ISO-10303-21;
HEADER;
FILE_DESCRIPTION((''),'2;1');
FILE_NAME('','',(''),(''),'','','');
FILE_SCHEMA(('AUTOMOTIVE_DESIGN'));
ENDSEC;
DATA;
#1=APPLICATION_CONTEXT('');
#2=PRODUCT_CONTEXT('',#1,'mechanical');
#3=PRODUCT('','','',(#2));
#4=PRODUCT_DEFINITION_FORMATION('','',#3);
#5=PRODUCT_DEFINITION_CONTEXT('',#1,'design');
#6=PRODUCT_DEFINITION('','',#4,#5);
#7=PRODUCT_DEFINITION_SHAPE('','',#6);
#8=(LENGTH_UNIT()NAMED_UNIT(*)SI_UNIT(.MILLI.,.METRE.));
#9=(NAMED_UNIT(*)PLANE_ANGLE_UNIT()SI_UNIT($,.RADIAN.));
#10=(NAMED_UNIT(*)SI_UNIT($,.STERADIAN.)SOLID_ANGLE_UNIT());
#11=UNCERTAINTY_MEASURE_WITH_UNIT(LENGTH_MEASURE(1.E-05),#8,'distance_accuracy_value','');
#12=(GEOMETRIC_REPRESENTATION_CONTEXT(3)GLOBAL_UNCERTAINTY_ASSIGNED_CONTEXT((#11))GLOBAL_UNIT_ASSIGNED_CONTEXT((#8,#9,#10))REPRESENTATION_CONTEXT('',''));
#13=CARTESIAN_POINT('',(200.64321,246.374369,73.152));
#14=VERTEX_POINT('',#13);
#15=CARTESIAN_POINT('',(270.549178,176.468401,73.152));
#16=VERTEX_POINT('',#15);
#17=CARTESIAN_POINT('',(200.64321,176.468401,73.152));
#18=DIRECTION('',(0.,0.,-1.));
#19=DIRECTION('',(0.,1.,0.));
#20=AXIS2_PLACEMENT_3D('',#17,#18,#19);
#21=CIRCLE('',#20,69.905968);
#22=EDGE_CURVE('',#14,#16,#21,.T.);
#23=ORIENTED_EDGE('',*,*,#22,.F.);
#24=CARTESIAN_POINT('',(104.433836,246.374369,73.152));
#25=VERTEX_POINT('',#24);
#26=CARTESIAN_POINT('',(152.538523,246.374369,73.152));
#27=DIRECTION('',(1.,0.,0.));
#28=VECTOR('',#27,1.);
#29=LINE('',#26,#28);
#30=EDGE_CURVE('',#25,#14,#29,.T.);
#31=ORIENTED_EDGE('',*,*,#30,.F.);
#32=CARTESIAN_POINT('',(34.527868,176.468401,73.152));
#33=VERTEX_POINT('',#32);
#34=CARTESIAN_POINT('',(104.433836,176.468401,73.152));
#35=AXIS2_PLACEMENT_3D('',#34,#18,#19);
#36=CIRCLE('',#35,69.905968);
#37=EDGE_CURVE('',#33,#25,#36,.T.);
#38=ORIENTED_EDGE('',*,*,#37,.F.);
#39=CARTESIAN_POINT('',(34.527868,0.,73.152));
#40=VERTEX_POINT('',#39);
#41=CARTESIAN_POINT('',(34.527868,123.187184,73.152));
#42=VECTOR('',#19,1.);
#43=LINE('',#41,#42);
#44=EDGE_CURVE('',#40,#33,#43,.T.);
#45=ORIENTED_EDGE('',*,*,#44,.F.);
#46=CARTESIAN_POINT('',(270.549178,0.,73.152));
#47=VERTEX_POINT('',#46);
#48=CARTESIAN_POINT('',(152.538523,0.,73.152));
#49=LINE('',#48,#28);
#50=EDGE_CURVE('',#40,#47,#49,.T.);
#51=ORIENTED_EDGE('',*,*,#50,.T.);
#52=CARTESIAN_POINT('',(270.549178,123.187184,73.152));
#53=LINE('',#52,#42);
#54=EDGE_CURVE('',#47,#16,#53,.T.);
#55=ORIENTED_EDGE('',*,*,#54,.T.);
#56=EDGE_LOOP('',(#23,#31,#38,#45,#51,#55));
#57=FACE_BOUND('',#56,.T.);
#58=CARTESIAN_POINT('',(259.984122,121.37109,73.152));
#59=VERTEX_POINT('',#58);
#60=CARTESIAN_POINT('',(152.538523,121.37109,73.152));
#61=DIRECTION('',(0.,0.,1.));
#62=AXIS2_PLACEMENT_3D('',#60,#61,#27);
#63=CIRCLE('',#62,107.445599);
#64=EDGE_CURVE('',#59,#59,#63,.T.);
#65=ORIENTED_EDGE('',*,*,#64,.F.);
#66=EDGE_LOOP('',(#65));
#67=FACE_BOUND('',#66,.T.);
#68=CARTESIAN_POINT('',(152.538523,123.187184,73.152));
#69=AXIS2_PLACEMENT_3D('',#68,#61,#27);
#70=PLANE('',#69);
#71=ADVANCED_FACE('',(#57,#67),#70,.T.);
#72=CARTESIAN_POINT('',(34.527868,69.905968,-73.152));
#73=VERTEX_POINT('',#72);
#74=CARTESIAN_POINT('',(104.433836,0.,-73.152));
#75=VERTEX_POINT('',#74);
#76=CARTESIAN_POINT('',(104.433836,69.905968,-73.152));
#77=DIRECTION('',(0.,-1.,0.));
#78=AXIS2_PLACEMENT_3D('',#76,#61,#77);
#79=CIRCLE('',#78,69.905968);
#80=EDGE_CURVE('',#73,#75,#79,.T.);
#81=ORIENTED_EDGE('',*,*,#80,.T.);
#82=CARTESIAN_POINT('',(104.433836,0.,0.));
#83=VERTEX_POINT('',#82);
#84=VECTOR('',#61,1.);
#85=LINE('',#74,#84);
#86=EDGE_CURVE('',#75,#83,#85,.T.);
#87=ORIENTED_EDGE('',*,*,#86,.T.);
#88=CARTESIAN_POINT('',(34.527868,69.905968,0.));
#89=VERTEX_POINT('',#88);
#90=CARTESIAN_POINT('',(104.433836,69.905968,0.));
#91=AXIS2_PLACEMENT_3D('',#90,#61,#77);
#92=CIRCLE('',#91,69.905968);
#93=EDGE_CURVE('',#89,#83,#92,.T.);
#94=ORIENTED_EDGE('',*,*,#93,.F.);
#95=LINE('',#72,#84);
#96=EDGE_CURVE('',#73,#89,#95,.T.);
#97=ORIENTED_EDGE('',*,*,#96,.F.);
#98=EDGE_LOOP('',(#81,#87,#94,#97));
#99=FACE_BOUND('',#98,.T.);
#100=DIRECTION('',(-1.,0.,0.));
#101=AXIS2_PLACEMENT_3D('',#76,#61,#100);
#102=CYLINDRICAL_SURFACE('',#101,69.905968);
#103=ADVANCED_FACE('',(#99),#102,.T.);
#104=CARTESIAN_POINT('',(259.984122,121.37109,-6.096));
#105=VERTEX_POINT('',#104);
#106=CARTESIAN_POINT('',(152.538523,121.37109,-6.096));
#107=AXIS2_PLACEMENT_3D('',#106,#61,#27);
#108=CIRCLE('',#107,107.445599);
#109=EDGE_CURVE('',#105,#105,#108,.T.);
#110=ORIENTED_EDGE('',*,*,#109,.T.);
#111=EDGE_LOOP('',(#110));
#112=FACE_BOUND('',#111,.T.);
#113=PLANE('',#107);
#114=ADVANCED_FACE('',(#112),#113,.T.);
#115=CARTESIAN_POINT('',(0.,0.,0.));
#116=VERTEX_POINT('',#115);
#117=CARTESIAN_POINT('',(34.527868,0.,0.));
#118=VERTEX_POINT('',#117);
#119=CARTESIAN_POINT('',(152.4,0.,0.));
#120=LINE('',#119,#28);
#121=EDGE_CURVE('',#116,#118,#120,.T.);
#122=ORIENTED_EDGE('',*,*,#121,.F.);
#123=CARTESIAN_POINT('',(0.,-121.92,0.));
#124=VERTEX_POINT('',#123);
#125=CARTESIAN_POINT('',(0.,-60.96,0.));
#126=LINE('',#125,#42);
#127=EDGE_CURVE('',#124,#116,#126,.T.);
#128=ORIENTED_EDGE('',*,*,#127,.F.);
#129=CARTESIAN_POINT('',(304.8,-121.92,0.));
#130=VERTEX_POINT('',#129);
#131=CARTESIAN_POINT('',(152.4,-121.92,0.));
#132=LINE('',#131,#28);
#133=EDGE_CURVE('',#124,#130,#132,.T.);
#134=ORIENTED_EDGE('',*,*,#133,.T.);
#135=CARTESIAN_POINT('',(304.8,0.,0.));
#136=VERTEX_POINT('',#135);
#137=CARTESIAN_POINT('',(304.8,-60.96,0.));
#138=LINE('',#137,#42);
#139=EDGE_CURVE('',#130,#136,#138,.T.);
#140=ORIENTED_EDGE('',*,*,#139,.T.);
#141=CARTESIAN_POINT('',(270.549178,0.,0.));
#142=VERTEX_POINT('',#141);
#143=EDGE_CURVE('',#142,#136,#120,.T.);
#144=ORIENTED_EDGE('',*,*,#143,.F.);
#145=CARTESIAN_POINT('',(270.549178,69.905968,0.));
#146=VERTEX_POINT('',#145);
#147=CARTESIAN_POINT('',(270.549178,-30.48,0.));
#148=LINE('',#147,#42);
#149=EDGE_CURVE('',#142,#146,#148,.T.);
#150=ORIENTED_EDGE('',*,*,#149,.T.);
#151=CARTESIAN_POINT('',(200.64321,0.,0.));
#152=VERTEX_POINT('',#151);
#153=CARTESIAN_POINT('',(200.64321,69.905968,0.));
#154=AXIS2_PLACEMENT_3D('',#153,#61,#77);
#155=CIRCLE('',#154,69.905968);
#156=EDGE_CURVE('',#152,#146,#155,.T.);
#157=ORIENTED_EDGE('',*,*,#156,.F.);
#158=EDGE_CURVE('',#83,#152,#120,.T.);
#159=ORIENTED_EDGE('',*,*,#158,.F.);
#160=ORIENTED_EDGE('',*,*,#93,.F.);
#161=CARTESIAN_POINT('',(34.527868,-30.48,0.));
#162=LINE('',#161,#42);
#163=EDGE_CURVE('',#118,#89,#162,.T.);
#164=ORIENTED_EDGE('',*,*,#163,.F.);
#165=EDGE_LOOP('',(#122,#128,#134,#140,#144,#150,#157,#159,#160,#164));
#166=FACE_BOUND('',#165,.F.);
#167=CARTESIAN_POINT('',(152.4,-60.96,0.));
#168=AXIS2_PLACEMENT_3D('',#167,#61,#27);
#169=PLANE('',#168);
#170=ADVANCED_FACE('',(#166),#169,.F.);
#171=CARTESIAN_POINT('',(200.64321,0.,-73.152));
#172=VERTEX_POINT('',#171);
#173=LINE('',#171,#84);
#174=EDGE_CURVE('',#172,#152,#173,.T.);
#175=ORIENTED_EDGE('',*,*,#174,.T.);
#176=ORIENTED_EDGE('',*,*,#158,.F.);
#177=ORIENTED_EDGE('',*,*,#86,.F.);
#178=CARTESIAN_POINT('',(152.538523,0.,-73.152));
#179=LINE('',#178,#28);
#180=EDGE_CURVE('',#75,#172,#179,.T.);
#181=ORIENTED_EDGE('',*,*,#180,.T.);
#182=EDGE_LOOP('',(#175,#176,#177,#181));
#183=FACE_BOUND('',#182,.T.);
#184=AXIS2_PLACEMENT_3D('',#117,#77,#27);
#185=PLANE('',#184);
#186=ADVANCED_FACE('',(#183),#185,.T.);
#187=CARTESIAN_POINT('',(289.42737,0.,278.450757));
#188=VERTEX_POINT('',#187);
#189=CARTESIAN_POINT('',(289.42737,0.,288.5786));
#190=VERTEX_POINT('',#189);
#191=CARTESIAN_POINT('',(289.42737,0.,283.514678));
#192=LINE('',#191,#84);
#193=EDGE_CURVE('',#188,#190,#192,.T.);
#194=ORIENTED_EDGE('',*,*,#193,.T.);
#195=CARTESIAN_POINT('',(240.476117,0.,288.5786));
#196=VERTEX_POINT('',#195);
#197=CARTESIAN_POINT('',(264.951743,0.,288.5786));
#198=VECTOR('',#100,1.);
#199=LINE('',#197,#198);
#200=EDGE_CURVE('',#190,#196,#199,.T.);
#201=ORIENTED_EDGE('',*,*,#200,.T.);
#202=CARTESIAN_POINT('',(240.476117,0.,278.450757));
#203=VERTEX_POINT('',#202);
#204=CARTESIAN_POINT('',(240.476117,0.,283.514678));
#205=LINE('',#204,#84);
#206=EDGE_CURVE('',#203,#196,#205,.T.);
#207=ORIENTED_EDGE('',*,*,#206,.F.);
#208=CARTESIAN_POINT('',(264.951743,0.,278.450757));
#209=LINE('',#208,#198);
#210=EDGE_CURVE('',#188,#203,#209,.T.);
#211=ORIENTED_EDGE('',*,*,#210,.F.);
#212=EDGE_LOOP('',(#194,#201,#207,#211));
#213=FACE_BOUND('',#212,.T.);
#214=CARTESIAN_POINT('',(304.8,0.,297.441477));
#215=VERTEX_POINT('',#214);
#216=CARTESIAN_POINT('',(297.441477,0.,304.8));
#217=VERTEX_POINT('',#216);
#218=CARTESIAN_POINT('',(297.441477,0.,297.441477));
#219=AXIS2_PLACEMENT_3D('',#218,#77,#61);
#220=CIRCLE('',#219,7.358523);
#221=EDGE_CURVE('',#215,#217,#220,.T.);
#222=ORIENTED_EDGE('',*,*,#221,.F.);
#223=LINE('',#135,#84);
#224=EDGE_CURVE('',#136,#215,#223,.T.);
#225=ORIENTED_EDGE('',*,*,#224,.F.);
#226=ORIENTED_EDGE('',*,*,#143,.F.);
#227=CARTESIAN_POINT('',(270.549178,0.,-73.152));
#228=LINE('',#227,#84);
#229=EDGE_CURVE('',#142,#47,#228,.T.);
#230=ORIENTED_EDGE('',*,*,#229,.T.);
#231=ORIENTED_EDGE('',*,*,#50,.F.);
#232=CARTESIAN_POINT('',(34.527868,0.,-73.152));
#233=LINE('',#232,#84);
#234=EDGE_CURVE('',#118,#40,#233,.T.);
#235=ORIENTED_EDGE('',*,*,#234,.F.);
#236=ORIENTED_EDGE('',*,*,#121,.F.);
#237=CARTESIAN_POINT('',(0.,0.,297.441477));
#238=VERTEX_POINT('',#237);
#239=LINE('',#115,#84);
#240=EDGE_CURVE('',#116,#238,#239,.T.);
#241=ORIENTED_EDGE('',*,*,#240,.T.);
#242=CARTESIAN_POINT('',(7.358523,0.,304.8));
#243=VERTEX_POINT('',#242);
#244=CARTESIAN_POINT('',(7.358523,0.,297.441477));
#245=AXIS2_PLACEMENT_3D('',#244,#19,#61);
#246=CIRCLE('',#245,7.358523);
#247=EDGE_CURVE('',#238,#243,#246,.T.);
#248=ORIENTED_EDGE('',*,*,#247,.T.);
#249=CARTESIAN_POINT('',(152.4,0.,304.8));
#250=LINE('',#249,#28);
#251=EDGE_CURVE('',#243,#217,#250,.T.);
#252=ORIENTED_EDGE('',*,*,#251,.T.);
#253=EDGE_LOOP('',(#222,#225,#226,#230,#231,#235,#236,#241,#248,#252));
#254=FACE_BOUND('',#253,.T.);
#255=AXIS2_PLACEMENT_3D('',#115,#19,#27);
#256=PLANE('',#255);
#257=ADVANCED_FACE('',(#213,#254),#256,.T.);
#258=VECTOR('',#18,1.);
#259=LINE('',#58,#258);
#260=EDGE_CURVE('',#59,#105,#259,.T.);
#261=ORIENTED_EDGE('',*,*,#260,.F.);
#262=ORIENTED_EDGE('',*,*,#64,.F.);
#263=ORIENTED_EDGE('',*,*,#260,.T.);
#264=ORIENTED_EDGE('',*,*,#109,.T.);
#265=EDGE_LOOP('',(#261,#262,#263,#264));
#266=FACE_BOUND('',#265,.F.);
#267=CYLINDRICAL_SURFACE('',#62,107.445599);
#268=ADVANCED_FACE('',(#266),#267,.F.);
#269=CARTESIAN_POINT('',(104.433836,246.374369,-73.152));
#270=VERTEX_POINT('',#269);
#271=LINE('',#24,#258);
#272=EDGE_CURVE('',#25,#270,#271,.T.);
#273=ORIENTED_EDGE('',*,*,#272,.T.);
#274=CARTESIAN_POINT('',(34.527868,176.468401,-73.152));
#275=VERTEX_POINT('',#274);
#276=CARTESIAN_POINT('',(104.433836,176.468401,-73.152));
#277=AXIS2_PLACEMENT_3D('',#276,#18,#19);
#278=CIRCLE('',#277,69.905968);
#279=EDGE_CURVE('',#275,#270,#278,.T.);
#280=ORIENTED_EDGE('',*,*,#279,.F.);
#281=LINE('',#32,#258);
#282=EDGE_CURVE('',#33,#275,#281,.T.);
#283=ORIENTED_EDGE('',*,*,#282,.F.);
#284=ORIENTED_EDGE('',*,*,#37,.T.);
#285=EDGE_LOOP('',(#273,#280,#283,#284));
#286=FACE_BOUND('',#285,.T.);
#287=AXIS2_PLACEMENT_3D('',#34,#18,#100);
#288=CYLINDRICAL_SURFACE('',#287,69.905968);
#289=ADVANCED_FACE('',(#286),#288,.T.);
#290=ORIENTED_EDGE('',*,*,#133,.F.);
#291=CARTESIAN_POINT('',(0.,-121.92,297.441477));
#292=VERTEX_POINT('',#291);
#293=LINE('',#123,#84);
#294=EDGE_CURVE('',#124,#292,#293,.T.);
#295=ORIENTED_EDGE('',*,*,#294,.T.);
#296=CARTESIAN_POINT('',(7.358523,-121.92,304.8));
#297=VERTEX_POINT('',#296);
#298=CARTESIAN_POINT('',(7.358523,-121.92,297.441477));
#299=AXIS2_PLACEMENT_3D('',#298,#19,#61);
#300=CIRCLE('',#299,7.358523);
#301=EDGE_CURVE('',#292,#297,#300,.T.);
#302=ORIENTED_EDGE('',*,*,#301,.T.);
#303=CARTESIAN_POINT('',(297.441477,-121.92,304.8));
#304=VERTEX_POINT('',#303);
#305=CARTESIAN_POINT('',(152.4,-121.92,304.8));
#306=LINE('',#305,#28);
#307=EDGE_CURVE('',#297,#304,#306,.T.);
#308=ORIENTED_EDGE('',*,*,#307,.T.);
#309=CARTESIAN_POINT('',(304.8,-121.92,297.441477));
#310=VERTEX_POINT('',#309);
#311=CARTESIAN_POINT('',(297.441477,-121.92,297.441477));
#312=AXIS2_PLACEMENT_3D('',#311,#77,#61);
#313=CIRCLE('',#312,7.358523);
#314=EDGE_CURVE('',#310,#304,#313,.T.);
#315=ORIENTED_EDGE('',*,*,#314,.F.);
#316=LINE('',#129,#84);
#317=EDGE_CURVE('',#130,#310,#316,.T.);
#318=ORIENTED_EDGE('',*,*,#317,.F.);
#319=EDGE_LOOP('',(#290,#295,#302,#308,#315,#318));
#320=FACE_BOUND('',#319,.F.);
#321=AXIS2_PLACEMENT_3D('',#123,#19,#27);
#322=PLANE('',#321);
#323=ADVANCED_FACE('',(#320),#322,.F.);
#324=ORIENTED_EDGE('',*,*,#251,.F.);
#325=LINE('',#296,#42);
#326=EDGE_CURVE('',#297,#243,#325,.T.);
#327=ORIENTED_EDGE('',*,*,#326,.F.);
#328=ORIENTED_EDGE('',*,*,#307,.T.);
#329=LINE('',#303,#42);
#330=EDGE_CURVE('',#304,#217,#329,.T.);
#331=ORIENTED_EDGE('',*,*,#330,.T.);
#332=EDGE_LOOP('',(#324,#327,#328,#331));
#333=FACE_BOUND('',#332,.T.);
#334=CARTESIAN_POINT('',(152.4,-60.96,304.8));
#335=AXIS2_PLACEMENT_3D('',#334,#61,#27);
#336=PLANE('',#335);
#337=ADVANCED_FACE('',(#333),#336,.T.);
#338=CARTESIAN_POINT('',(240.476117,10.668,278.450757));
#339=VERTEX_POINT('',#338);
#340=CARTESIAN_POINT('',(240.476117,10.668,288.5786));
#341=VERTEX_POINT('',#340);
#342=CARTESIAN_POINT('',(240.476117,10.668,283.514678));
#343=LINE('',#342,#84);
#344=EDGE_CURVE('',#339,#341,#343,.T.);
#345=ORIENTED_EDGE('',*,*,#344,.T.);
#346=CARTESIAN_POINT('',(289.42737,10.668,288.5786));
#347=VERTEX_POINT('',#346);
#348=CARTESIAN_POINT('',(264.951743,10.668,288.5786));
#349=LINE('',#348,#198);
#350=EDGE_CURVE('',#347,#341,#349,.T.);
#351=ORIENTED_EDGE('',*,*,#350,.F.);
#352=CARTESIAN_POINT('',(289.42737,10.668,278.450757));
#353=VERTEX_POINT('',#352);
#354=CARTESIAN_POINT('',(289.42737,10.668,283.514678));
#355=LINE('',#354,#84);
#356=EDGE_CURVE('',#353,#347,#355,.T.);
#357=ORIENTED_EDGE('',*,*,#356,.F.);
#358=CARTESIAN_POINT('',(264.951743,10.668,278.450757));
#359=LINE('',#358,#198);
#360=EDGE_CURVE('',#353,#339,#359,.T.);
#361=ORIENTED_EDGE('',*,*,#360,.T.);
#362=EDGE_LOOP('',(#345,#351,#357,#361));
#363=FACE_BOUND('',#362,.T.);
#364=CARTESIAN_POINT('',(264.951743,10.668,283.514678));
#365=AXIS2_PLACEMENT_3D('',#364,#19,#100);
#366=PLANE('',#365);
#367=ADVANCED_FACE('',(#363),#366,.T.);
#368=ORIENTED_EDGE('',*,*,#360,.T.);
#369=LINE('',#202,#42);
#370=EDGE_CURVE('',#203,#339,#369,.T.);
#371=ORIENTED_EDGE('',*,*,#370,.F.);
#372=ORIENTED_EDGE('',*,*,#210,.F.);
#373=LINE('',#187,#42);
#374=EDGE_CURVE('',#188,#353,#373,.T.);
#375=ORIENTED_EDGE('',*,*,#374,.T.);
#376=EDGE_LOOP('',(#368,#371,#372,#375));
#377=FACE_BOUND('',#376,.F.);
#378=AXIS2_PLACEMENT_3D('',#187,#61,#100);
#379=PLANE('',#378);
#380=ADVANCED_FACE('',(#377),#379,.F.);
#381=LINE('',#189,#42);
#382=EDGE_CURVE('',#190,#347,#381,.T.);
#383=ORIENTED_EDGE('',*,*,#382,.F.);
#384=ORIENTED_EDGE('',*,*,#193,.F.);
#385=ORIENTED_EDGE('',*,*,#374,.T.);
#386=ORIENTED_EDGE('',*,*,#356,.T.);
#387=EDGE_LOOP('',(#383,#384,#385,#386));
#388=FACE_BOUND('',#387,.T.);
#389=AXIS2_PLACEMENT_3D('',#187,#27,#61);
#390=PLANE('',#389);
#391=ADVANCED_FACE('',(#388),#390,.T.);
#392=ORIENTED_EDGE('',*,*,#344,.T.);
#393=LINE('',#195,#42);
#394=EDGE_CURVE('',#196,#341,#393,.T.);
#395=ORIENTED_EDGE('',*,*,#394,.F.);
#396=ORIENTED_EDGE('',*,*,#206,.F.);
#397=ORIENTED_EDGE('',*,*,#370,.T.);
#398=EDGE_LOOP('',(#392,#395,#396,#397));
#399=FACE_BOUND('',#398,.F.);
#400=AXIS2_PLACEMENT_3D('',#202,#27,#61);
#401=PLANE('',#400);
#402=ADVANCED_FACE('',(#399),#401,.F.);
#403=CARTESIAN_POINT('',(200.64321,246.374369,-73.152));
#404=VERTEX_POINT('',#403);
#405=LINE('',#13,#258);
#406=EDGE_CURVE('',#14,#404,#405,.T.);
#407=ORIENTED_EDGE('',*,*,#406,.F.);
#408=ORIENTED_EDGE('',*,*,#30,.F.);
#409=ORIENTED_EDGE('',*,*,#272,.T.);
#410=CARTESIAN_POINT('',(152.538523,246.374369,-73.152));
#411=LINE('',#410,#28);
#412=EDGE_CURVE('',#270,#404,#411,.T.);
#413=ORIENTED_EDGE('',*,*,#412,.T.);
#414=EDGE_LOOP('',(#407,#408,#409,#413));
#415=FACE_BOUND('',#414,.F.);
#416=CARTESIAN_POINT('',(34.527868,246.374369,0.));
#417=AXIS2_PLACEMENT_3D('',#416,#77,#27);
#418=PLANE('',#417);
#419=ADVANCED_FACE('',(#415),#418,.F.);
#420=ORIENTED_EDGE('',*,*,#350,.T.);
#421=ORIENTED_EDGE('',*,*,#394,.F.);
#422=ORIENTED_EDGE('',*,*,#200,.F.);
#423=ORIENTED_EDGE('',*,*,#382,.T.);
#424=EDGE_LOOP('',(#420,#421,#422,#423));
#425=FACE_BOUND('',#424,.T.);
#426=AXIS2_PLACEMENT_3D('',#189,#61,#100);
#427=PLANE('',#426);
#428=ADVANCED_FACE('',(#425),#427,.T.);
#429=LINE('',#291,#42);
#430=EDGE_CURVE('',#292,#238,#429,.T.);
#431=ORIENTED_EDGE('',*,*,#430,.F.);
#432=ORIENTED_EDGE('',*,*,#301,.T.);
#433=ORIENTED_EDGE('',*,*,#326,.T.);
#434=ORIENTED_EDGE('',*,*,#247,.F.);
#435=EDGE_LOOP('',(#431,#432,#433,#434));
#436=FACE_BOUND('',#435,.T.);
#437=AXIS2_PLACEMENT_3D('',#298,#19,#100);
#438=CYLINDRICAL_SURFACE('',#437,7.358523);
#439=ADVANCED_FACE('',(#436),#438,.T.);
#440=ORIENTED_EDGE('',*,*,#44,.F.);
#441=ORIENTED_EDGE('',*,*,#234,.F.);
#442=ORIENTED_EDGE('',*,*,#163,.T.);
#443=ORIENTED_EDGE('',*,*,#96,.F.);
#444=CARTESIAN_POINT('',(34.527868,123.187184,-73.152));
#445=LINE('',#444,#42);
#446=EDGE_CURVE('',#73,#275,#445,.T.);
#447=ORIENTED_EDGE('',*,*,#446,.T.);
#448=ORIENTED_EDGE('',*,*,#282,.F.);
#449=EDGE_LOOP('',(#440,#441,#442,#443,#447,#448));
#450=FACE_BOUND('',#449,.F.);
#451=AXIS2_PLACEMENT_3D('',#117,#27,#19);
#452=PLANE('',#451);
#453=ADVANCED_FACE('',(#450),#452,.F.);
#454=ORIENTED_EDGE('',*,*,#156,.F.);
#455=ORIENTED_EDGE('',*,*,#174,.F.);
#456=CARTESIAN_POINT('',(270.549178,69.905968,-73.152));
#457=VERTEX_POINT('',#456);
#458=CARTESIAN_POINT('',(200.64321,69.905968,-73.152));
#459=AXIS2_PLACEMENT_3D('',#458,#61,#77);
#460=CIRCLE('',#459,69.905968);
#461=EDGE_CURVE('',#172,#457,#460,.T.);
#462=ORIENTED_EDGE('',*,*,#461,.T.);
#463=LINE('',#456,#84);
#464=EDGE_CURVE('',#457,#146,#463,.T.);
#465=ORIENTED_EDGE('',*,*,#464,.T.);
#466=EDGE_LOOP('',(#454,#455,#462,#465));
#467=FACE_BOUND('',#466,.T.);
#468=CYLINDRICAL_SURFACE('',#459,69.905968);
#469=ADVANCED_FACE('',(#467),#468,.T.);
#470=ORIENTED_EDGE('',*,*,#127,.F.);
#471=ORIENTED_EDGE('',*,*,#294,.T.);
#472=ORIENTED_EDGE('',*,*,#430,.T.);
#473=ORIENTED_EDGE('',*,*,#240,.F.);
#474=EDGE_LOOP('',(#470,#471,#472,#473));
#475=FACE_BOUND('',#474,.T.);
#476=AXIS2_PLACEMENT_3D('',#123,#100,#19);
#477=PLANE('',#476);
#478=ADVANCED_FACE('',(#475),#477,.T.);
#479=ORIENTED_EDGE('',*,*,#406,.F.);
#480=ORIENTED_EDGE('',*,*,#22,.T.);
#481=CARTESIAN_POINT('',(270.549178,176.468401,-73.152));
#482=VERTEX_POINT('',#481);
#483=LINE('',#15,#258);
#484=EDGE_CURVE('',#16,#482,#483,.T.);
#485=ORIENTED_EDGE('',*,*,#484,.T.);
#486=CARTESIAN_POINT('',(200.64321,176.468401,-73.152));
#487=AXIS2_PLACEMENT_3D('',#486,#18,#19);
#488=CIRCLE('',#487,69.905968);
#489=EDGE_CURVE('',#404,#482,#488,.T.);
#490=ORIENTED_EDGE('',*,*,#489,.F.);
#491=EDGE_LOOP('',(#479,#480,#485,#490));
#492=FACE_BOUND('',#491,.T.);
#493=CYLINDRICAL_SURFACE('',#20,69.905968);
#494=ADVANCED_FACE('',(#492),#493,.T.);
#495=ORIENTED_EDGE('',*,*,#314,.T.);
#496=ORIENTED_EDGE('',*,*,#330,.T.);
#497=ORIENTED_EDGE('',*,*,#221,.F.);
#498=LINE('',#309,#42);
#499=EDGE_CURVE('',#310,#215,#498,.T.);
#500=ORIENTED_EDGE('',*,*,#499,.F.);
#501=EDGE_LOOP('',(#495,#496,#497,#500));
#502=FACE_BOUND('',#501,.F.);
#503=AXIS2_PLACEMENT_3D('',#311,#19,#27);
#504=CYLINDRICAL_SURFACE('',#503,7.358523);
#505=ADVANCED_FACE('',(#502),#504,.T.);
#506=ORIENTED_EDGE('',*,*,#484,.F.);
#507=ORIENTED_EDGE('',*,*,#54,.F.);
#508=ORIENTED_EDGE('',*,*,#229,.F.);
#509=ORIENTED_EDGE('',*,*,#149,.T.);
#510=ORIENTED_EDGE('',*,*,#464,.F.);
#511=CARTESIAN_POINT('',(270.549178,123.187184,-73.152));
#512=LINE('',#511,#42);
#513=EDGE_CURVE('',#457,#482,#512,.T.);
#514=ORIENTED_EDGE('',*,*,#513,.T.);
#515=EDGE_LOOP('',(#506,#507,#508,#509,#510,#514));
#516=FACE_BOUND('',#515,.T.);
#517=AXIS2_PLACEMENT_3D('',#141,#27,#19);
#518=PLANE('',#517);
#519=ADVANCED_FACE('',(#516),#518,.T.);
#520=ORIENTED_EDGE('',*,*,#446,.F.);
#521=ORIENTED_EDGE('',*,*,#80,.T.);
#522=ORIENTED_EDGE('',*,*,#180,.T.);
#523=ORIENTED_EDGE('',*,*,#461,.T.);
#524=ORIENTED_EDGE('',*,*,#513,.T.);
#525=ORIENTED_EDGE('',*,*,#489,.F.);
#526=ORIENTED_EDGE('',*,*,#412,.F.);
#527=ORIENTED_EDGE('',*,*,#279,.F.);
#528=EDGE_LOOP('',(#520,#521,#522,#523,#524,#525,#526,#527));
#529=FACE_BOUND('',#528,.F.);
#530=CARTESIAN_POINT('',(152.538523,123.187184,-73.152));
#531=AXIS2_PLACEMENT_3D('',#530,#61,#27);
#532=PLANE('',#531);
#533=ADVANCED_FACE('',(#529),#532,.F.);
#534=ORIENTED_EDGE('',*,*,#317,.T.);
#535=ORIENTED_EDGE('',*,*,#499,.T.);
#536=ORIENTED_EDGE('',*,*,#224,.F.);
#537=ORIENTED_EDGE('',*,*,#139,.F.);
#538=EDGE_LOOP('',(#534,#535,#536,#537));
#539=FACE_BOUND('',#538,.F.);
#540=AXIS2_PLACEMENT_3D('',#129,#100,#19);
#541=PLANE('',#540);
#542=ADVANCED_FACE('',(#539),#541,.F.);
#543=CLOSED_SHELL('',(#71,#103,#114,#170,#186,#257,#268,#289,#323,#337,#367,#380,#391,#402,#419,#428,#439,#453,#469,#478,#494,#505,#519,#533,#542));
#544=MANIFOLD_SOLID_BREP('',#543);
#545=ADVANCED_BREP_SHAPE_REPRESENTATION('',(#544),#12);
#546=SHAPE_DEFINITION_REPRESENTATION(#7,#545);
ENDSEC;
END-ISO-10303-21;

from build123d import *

# Parameters (mm, degrees)
F0_W     = 304.8
F0_H     = 121.92
F1_DEPTH = 304.8
F2_W     = 236.021310091
F2_H     = 246.3743686676
F3_DEPTH = 73.152
F4_R     = 69.9059679121
F5_R     = 107.4455989459
F6_DEPTH = 79.248
F7_R     = 7.3585229381
F8_W     = 48.9512532949
F8_H     = 10.1278424263
F9_DEPTH = 10.668


with BuildPart() as f1:
    # F0 (on Top) → F1 (new body)
    with BuildSketch(Plane.XY):
        with Locations((152.4, -60.96)):
            Rectangle(F0_W, F0_H)
    extrude(amount=F1_DEPTH)

    # F2 (on Top) → F3 (join, symmetric)
    with BuildSketch(Plane.XY):
        with Locations((152.538523078, 123.1871843338)):
            Rectangle(F2_W, F2_H)
    extrude(amount=F3_DEPTH, both=True)

    # F4
    f4_edges = [f1.edges().sort_by_distance(p)[0] for p in [
        (34.527868, 246.374369, 0),
        (270.549178, 246.374369, 0),
        (34.527868, 0, -36.576),
        (270.549178, 0, -36.576),
    ]]
    fillet(f4_edges, radius=F4_R)

    # F5 (on face) → F6 (cut)
    with BuildSketch(Plane.XY.offset(73.152)):
        with Locations((152.538523078, 121.3710904121)):
            Circle(F5_R)
    extrude(amount=-F6_DEPTH, mode=Mode.SUBTRACT)

    # F7
    f7_edges = [f1.edges().sort_by_distance(p)[0] for p in [
        (304.8, -60.96, 304.8),
        (0, -60.96, 304.8),
    ]]
    fillet(f7_edges, radius=F7_R)

    # F8 (on face) → F9 (join)
    with BuildSketch(Plane(origin=(0, 0, 0), x_dir=(-1, 0, 0), z_dir=(0, 1, 0))):
        with Locations((-264.9517431855, 283.5146784782)):
            Rectangle(F8_W, F8_H)
    extrude(amount=F9_DEPTH)


solid = f1.part
